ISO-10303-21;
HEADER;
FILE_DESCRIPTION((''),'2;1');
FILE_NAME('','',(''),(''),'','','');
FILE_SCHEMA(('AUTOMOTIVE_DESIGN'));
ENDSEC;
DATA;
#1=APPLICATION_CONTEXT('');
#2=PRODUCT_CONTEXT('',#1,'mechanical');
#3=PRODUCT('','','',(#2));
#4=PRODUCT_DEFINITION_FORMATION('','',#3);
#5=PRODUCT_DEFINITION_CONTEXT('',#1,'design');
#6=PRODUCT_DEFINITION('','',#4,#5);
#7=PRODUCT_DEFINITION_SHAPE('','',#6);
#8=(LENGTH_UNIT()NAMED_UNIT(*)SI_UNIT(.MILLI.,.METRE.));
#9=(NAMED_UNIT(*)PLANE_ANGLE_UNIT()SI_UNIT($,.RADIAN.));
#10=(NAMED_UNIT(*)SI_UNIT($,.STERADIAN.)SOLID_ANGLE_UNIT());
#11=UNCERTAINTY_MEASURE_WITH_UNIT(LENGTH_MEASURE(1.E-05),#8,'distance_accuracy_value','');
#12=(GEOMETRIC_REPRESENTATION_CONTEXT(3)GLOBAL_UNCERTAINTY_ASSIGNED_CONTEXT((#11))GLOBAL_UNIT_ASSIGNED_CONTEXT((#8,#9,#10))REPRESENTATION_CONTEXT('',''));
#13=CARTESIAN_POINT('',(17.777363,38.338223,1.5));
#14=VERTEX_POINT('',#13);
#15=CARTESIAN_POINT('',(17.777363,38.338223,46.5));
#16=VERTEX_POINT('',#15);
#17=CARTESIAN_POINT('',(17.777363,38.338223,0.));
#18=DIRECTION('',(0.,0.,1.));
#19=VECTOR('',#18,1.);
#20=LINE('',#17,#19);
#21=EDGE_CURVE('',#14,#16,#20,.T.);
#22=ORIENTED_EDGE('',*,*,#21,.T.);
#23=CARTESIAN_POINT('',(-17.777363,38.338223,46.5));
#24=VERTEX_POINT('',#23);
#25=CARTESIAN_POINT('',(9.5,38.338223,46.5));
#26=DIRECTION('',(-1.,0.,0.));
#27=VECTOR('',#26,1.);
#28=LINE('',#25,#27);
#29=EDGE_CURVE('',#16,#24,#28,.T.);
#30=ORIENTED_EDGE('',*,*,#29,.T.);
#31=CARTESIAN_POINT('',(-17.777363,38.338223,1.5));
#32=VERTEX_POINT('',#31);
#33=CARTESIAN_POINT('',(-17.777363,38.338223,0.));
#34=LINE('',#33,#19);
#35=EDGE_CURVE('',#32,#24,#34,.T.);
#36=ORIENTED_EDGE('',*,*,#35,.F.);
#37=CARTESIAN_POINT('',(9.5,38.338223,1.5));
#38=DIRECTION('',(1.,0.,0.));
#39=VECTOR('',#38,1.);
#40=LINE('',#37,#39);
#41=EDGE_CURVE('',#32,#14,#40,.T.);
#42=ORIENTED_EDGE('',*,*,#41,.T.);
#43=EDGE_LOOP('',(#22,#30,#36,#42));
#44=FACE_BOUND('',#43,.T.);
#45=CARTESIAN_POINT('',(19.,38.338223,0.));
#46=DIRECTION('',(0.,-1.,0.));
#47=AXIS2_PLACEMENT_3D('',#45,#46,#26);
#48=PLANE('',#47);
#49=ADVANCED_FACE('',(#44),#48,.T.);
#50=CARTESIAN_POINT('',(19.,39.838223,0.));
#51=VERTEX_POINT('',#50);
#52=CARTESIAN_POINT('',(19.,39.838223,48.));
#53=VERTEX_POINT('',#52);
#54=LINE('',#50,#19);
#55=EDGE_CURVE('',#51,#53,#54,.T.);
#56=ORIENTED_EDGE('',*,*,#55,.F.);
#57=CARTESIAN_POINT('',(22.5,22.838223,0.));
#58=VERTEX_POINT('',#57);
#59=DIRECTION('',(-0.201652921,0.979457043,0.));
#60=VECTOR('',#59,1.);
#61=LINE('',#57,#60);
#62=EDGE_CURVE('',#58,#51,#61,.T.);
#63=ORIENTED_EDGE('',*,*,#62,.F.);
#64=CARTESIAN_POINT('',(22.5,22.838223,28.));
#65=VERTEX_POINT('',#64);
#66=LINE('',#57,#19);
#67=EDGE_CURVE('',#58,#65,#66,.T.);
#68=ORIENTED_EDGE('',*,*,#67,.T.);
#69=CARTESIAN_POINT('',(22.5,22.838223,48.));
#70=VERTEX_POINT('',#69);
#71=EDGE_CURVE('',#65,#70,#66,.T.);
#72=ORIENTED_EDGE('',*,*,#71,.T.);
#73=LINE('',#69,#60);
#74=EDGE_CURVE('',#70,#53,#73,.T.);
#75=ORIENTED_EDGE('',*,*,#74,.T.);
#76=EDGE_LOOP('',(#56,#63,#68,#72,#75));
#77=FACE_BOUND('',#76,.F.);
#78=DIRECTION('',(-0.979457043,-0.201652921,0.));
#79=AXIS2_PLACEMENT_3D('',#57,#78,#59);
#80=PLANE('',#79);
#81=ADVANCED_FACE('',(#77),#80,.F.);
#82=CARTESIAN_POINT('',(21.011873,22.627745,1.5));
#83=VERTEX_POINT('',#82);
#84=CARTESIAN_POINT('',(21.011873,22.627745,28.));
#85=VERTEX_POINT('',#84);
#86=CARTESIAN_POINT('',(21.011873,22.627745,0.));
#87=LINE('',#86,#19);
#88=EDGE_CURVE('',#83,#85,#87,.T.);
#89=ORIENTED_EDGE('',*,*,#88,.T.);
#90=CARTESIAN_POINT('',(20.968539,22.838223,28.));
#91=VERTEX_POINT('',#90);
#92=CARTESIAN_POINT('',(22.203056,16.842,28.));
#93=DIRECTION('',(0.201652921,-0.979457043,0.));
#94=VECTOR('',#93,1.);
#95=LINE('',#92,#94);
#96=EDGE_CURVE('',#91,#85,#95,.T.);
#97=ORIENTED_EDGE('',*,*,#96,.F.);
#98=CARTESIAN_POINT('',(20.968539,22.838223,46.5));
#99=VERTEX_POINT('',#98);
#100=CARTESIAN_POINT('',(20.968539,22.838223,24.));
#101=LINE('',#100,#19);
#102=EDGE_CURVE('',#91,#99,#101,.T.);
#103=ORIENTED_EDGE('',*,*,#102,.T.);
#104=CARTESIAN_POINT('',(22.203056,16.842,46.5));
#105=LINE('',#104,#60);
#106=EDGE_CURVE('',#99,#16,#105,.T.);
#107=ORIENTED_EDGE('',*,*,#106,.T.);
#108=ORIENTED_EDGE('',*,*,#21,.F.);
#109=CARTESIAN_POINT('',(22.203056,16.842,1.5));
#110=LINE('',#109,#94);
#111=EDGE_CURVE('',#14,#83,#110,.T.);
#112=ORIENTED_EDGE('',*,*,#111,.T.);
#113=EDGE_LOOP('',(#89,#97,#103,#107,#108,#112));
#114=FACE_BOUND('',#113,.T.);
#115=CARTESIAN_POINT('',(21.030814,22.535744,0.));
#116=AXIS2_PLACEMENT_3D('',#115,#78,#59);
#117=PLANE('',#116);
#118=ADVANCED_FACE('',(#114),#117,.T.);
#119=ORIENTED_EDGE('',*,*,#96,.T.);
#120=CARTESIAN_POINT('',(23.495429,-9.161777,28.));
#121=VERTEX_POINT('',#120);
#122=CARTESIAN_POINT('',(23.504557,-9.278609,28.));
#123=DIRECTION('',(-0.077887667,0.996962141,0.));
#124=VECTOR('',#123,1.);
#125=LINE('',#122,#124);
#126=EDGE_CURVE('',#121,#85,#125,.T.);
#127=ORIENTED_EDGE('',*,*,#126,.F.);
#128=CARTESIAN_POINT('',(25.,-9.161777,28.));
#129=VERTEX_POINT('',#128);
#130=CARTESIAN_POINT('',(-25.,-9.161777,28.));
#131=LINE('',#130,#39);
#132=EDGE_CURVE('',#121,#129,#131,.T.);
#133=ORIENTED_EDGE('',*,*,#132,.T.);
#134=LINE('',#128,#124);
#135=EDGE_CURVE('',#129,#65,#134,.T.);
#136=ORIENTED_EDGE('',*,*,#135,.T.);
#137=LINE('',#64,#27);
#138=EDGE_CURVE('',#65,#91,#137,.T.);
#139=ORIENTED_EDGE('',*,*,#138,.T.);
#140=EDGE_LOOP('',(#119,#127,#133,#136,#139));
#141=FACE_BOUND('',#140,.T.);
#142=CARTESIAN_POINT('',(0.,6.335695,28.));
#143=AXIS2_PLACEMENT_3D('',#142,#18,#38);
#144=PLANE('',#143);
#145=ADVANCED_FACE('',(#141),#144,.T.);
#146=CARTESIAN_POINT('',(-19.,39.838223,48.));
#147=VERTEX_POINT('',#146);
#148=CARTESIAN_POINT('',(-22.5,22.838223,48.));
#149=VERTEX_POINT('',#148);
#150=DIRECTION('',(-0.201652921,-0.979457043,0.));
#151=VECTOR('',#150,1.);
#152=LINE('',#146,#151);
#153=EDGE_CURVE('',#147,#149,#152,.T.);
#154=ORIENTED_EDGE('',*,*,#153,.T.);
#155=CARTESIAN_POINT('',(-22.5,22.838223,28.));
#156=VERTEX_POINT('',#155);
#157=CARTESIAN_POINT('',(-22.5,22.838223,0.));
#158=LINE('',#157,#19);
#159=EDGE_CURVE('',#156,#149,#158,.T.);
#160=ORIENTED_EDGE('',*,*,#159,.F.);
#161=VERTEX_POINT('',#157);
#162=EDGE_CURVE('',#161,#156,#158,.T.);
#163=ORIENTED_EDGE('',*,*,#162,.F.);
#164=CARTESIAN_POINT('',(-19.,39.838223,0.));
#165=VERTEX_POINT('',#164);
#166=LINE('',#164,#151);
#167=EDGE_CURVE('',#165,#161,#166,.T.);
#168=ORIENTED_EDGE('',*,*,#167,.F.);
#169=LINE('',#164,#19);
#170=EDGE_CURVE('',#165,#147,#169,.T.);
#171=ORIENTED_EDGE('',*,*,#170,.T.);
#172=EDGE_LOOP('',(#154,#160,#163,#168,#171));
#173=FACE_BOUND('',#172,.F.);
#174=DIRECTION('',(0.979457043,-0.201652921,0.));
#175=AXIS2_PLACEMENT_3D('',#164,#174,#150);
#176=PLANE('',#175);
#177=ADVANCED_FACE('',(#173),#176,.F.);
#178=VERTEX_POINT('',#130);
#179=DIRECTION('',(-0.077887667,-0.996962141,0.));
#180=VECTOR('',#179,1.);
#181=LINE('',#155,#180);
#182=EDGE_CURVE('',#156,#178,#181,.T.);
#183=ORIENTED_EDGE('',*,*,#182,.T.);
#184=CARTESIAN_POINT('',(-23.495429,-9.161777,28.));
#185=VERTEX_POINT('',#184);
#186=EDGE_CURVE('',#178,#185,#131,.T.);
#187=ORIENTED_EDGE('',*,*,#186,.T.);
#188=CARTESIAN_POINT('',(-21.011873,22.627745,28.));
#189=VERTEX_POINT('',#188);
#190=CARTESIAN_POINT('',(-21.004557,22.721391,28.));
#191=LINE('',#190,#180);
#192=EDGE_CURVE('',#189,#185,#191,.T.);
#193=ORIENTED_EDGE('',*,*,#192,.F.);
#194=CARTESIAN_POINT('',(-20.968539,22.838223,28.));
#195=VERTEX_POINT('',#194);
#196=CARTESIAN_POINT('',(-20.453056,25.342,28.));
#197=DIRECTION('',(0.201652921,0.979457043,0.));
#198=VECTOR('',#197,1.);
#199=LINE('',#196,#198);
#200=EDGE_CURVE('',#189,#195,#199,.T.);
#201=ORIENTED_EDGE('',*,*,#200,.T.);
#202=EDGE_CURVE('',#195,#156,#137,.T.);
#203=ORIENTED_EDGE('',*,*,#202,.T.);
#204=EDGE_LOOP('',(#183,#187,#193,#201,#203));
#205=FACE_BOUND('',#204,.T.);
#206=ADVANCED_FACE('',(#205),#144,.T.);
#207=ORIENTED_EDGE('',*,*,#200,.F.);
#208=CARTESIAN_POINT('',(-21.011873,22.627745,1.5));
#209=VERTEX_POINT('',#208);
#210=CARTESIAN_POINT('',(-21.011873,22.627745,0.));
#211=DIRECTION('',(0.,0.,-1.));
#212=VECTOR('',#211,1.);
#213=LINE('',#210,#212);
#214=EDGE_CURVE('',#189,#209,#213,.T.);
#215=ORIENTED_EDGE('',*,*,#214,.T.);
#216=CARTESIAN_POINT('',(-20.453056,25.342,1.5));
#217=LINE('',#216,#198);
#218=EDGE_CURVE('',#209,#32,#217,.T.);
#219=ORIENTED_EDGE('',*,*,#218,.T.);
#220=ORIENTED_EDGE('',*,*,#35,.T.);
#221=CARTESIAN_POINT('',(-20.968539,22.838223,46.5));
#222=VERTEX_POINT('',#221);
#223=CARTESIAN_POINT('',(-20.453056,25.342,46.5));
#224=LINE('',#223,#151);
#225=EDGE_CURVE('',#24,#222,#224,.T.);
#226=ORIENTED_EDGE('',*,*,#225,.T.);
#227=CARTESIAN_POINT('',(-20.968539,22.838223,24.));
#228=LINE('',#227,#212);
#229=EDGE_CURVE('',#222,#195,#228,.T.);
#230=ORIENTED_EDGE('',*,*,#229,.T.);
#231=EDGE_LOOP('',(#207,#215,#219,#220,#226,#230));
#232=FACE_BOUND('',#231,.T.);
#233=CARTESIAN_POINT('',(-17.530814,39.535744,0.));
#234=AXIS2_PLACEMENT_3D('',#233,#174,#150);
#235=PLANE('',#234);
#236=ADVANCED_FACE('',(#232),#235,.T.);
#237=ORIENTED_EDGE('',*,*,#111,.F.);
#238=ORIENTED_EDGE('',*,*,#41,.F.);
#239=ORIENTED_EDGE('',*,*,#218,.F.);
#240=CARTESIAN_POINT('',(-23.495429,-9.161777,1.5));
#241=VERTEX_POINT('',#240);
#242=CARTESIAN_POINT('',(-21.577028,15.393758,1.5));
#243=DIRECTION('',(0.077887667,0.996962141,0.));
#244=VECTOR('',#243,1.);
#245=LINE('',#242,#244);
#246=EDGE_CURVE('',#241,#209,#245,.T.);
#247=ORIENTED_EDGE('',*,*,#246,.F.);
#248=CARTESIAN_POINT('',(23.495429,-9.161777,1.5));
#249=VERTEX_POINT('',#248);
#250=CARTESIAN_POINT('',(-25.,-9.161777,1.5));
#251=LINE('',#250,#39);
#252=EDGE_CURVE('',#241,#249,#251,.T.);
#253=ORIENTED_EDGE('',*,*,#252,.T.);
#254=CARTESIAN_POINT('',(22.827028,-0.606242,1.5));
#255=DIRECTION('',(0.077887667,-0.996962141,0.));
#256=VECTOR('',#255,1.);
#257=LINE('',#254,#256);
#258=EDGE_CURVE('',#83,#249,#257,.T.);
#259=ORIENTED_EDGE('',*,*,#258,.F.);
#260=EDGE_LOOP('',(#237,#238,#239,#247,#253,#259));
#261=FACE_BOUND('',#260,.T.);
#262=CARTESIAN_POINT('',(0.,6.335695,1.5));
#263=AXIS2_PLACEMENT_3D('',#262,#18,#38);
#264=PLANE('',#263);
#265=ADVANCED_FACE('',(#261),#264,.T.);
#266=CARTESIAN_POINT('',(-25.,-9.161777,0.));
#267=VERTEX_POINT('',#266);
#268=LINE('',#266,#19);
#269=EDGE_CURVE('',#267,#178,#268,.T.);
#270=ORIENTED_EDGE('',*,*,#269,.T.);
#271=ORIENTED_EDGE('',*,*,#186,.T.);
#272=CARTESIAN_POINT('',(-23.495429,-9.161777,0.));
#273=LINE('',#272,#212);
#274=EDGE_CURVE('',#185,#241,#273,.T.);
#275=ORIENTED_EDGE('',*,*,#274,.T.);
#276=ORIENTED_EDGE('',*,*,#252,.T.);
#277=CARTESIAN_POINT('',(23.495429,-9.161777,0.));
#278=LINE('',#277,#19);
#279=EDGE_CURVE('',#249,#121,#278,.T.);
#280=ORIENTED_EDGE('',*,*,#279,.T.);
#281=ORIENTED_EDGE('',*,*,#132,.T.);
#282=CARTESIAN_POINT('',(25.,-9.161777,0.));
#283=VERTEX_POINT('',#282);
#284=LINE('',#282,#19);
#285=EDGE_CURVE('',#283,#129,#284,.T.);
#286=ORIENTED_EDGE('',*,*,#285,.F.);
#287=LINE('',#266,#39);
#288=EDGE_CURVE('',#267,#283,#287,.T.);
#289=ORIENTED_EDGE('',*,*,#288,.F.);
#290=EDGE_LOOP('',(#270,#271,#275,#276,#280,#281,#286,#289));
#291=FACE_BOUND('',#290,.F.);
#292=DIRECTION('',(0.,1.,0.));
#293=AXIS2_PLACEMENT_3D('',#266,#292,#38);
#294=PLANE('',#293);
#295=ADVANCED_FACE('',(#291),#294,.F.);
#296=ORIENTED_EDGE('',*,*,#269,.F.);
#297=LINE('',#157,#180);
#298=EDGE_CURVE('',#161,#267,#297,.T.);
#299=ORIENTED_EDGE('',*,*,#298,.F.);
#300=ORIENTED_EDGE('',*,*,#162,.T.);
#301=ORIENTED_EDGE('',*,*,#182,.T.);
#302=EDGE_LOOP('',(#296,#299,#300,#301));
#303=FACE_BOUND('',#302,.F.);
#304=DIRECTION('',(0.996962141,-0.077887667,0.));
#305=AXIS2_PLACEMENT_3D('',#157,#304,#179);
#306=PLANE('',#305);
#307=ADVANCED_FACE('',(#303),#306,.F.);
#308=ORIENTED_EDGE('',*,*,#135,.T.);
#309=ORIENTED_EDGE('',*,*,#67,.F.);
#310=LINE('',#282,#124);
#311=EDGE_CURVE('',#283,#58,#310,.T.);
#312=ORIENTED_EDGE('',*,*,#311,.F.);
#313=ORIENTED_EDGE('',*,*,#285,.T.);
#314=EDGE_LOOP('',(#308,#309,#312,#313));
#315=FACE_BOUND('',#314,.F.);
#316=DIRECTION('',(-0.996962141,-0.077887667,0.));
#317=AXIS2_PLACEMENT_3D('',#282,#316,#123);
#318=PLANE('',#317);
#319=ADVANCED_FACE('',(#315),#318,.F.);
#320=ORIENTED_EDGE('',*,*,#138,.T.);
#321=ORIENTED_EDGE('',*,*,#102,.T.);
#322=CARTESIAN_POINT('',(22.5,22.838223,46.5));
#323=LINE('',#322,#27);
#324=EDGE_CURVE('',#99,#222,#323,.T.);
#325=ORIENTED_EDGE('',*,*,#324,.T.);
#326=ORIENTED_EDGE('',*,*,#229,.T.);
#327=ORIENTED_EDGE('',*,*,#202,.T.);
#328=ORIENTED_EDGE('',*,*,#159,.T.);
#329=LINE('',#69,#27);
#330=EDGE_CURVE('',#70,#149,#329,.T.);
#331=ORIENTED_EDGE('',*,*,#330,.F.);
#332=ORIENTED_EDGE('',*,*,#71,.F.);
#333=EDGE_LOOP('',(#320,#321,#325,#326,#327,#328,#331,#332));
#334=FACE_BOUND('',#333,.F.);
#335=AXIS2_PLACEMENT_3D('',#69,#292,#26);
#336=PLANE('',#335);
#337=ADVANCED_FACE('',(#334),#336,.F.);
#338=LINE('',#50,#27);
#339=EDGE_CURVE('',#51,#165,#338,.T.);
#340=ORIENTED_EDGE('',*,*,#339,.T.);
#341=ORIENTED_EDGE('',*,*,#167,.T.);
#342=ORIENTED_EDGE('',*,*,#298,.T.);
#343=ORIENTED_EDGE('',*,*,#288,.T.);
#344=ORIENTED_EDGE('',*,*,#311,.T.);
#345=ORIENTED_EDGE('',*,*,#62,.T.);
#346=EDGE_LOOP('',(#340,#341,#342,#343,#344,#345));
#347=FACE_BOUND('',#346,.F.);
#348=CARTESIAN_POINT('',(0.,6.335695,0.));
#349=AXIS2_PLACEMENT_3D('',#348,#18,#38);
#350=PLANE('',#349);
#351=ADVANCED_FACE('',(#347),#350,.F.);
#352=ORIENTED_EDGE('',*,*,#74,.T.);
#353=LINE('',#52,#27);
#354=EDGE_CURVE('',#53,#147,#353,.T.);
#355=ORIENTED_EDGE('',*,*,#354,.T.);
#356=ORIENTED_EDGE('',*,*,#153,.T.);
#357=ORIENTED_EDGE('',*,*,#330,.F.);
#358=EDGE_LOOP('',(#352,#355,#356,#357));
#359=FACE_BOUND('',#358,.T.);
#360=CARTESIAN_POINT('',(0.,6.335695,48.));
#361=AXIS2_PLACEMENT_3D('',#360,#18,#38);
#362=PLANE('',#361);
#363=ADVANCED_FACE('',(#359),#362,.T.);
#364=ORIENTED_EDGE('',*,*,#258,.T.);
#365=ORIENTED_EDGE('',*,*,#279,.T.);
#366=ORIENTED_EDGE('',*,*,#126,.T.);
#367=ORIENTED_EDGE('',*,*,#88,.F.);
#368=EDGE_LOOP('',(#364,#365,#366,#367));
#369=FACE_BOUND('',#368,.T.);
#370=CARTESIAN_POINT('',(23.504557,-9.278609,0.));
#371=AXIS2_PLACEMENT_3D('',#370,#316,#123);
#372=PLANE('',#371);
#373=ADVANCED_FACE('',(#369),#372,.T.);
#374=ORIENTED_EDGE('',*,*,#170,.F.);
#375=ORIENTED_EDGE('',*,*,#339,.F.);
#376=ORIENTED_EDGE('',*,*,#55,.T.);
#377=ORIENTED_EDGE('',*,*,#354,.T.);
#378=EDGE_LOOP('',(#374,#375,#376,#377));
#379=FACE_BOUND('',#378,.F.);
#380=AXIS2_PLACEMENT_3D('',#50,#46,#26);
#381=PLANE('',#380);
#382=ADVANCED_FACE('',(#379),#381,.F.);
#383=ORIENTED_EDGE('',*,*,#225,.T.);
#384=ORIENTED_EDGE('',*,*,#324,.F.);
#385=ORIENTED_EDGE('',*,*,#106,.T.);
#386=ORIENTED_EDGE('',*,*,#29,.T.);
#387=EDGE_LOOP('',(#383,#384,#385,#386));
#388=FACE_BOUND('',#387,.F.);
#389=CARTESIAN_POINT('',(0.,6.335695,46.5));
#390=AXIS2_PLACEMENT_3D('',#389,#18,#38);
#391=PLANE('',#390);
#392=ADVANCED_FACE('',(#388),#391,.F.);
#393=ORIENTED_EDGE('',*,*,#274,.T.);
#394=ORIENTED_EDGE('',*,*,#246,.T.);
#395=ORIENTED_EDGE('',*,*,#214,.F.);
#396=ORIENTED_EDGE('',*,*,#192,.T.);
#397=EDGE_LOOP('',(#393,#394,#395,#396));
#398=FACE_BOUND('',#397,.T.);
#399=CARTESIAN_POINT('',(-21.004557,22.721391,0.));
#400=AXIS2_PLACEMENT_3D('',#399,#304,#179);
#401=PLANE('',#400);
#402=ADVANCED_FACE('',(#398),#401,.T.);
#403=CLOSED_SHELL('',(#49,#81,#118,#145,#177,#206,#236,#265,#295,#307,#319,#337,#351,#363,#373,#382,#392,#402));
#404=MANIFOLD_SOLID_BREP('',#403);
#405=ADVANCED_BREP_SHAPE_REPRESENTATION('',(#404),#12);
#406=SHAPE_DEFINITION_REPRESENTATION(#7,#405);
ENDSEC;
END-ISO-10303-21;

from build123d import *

# Parameters (mm, degrees)
F1_DEPTH = 48
F3_DEPTH = 20
F4_T     = 1.5


# Not quite as in the source:
# - a shell that OpenCascade refuses in one call is made with other operations: the cavity is built on its own and cut out


with BuildPart() as f1:
    # F0 (on Top) → F1 (new body)
    with BuildSketch(Plane.XY):
        Polygon((22.5, 22.8382229426), (-22.5, 22.8382229426), (-25, -9.1617770574), (25, -9.1617770574), align=None)
        Polygon((19, 39.8382229426), (-19, 39.8382229426), (-22.5, 22.8382229426), (22.5, 22.8382229426), align=None)
    extrude(amount=F1_DEPTH)

    # F2 (on face) → F3 (cut)
    with BuildSketch(Plane.XY.offset(48)):
        Polygon((22.5, 22.8382229426), (-22.5, 22.8382229426), (-25, -9.1617770574), (25, -9.1617770574), align=None)
    extrude(amount=-F3_DEPTH, mode=Mode.SUBTRACT)

    # F4: shell of thickness 1.5, made by hand


with BuildPart() as f4_core1:
    # F4_t2: copy of F1
    add(f1.part)

    # the walls: a layer under each face that stays
    f4_faces = [f4_core1.faces().sort_by_distance(p)[0] for p in [
        (0, 15.3382229426, 0),
        (23.75, 6.8382229426, 14),
        (-23.75, 6.8382229426, 14),
        (20.75, 31.3382229426, 24),
        (0, 39.8382229426, 24),
        (-20.75, 31.3382229426, 24),
        (0, 31.3382229426, 48),
    ]]
    thicken(f4_faces, amount=-F4_T, mode=Mode.SUBTRACT)


with BuildPart() as f1_1:
    add(f1.part)

    # what is left inside the walls is the cavity
    f4_cavity = [f4_core1.part.solids().sort_by_distance(p)[0] for p in [
        (0, 6.671556, 1.515),
    ]]
    add(f4_cavity, mode=Mode.SUBTRACT)


solid = f1_1.part
